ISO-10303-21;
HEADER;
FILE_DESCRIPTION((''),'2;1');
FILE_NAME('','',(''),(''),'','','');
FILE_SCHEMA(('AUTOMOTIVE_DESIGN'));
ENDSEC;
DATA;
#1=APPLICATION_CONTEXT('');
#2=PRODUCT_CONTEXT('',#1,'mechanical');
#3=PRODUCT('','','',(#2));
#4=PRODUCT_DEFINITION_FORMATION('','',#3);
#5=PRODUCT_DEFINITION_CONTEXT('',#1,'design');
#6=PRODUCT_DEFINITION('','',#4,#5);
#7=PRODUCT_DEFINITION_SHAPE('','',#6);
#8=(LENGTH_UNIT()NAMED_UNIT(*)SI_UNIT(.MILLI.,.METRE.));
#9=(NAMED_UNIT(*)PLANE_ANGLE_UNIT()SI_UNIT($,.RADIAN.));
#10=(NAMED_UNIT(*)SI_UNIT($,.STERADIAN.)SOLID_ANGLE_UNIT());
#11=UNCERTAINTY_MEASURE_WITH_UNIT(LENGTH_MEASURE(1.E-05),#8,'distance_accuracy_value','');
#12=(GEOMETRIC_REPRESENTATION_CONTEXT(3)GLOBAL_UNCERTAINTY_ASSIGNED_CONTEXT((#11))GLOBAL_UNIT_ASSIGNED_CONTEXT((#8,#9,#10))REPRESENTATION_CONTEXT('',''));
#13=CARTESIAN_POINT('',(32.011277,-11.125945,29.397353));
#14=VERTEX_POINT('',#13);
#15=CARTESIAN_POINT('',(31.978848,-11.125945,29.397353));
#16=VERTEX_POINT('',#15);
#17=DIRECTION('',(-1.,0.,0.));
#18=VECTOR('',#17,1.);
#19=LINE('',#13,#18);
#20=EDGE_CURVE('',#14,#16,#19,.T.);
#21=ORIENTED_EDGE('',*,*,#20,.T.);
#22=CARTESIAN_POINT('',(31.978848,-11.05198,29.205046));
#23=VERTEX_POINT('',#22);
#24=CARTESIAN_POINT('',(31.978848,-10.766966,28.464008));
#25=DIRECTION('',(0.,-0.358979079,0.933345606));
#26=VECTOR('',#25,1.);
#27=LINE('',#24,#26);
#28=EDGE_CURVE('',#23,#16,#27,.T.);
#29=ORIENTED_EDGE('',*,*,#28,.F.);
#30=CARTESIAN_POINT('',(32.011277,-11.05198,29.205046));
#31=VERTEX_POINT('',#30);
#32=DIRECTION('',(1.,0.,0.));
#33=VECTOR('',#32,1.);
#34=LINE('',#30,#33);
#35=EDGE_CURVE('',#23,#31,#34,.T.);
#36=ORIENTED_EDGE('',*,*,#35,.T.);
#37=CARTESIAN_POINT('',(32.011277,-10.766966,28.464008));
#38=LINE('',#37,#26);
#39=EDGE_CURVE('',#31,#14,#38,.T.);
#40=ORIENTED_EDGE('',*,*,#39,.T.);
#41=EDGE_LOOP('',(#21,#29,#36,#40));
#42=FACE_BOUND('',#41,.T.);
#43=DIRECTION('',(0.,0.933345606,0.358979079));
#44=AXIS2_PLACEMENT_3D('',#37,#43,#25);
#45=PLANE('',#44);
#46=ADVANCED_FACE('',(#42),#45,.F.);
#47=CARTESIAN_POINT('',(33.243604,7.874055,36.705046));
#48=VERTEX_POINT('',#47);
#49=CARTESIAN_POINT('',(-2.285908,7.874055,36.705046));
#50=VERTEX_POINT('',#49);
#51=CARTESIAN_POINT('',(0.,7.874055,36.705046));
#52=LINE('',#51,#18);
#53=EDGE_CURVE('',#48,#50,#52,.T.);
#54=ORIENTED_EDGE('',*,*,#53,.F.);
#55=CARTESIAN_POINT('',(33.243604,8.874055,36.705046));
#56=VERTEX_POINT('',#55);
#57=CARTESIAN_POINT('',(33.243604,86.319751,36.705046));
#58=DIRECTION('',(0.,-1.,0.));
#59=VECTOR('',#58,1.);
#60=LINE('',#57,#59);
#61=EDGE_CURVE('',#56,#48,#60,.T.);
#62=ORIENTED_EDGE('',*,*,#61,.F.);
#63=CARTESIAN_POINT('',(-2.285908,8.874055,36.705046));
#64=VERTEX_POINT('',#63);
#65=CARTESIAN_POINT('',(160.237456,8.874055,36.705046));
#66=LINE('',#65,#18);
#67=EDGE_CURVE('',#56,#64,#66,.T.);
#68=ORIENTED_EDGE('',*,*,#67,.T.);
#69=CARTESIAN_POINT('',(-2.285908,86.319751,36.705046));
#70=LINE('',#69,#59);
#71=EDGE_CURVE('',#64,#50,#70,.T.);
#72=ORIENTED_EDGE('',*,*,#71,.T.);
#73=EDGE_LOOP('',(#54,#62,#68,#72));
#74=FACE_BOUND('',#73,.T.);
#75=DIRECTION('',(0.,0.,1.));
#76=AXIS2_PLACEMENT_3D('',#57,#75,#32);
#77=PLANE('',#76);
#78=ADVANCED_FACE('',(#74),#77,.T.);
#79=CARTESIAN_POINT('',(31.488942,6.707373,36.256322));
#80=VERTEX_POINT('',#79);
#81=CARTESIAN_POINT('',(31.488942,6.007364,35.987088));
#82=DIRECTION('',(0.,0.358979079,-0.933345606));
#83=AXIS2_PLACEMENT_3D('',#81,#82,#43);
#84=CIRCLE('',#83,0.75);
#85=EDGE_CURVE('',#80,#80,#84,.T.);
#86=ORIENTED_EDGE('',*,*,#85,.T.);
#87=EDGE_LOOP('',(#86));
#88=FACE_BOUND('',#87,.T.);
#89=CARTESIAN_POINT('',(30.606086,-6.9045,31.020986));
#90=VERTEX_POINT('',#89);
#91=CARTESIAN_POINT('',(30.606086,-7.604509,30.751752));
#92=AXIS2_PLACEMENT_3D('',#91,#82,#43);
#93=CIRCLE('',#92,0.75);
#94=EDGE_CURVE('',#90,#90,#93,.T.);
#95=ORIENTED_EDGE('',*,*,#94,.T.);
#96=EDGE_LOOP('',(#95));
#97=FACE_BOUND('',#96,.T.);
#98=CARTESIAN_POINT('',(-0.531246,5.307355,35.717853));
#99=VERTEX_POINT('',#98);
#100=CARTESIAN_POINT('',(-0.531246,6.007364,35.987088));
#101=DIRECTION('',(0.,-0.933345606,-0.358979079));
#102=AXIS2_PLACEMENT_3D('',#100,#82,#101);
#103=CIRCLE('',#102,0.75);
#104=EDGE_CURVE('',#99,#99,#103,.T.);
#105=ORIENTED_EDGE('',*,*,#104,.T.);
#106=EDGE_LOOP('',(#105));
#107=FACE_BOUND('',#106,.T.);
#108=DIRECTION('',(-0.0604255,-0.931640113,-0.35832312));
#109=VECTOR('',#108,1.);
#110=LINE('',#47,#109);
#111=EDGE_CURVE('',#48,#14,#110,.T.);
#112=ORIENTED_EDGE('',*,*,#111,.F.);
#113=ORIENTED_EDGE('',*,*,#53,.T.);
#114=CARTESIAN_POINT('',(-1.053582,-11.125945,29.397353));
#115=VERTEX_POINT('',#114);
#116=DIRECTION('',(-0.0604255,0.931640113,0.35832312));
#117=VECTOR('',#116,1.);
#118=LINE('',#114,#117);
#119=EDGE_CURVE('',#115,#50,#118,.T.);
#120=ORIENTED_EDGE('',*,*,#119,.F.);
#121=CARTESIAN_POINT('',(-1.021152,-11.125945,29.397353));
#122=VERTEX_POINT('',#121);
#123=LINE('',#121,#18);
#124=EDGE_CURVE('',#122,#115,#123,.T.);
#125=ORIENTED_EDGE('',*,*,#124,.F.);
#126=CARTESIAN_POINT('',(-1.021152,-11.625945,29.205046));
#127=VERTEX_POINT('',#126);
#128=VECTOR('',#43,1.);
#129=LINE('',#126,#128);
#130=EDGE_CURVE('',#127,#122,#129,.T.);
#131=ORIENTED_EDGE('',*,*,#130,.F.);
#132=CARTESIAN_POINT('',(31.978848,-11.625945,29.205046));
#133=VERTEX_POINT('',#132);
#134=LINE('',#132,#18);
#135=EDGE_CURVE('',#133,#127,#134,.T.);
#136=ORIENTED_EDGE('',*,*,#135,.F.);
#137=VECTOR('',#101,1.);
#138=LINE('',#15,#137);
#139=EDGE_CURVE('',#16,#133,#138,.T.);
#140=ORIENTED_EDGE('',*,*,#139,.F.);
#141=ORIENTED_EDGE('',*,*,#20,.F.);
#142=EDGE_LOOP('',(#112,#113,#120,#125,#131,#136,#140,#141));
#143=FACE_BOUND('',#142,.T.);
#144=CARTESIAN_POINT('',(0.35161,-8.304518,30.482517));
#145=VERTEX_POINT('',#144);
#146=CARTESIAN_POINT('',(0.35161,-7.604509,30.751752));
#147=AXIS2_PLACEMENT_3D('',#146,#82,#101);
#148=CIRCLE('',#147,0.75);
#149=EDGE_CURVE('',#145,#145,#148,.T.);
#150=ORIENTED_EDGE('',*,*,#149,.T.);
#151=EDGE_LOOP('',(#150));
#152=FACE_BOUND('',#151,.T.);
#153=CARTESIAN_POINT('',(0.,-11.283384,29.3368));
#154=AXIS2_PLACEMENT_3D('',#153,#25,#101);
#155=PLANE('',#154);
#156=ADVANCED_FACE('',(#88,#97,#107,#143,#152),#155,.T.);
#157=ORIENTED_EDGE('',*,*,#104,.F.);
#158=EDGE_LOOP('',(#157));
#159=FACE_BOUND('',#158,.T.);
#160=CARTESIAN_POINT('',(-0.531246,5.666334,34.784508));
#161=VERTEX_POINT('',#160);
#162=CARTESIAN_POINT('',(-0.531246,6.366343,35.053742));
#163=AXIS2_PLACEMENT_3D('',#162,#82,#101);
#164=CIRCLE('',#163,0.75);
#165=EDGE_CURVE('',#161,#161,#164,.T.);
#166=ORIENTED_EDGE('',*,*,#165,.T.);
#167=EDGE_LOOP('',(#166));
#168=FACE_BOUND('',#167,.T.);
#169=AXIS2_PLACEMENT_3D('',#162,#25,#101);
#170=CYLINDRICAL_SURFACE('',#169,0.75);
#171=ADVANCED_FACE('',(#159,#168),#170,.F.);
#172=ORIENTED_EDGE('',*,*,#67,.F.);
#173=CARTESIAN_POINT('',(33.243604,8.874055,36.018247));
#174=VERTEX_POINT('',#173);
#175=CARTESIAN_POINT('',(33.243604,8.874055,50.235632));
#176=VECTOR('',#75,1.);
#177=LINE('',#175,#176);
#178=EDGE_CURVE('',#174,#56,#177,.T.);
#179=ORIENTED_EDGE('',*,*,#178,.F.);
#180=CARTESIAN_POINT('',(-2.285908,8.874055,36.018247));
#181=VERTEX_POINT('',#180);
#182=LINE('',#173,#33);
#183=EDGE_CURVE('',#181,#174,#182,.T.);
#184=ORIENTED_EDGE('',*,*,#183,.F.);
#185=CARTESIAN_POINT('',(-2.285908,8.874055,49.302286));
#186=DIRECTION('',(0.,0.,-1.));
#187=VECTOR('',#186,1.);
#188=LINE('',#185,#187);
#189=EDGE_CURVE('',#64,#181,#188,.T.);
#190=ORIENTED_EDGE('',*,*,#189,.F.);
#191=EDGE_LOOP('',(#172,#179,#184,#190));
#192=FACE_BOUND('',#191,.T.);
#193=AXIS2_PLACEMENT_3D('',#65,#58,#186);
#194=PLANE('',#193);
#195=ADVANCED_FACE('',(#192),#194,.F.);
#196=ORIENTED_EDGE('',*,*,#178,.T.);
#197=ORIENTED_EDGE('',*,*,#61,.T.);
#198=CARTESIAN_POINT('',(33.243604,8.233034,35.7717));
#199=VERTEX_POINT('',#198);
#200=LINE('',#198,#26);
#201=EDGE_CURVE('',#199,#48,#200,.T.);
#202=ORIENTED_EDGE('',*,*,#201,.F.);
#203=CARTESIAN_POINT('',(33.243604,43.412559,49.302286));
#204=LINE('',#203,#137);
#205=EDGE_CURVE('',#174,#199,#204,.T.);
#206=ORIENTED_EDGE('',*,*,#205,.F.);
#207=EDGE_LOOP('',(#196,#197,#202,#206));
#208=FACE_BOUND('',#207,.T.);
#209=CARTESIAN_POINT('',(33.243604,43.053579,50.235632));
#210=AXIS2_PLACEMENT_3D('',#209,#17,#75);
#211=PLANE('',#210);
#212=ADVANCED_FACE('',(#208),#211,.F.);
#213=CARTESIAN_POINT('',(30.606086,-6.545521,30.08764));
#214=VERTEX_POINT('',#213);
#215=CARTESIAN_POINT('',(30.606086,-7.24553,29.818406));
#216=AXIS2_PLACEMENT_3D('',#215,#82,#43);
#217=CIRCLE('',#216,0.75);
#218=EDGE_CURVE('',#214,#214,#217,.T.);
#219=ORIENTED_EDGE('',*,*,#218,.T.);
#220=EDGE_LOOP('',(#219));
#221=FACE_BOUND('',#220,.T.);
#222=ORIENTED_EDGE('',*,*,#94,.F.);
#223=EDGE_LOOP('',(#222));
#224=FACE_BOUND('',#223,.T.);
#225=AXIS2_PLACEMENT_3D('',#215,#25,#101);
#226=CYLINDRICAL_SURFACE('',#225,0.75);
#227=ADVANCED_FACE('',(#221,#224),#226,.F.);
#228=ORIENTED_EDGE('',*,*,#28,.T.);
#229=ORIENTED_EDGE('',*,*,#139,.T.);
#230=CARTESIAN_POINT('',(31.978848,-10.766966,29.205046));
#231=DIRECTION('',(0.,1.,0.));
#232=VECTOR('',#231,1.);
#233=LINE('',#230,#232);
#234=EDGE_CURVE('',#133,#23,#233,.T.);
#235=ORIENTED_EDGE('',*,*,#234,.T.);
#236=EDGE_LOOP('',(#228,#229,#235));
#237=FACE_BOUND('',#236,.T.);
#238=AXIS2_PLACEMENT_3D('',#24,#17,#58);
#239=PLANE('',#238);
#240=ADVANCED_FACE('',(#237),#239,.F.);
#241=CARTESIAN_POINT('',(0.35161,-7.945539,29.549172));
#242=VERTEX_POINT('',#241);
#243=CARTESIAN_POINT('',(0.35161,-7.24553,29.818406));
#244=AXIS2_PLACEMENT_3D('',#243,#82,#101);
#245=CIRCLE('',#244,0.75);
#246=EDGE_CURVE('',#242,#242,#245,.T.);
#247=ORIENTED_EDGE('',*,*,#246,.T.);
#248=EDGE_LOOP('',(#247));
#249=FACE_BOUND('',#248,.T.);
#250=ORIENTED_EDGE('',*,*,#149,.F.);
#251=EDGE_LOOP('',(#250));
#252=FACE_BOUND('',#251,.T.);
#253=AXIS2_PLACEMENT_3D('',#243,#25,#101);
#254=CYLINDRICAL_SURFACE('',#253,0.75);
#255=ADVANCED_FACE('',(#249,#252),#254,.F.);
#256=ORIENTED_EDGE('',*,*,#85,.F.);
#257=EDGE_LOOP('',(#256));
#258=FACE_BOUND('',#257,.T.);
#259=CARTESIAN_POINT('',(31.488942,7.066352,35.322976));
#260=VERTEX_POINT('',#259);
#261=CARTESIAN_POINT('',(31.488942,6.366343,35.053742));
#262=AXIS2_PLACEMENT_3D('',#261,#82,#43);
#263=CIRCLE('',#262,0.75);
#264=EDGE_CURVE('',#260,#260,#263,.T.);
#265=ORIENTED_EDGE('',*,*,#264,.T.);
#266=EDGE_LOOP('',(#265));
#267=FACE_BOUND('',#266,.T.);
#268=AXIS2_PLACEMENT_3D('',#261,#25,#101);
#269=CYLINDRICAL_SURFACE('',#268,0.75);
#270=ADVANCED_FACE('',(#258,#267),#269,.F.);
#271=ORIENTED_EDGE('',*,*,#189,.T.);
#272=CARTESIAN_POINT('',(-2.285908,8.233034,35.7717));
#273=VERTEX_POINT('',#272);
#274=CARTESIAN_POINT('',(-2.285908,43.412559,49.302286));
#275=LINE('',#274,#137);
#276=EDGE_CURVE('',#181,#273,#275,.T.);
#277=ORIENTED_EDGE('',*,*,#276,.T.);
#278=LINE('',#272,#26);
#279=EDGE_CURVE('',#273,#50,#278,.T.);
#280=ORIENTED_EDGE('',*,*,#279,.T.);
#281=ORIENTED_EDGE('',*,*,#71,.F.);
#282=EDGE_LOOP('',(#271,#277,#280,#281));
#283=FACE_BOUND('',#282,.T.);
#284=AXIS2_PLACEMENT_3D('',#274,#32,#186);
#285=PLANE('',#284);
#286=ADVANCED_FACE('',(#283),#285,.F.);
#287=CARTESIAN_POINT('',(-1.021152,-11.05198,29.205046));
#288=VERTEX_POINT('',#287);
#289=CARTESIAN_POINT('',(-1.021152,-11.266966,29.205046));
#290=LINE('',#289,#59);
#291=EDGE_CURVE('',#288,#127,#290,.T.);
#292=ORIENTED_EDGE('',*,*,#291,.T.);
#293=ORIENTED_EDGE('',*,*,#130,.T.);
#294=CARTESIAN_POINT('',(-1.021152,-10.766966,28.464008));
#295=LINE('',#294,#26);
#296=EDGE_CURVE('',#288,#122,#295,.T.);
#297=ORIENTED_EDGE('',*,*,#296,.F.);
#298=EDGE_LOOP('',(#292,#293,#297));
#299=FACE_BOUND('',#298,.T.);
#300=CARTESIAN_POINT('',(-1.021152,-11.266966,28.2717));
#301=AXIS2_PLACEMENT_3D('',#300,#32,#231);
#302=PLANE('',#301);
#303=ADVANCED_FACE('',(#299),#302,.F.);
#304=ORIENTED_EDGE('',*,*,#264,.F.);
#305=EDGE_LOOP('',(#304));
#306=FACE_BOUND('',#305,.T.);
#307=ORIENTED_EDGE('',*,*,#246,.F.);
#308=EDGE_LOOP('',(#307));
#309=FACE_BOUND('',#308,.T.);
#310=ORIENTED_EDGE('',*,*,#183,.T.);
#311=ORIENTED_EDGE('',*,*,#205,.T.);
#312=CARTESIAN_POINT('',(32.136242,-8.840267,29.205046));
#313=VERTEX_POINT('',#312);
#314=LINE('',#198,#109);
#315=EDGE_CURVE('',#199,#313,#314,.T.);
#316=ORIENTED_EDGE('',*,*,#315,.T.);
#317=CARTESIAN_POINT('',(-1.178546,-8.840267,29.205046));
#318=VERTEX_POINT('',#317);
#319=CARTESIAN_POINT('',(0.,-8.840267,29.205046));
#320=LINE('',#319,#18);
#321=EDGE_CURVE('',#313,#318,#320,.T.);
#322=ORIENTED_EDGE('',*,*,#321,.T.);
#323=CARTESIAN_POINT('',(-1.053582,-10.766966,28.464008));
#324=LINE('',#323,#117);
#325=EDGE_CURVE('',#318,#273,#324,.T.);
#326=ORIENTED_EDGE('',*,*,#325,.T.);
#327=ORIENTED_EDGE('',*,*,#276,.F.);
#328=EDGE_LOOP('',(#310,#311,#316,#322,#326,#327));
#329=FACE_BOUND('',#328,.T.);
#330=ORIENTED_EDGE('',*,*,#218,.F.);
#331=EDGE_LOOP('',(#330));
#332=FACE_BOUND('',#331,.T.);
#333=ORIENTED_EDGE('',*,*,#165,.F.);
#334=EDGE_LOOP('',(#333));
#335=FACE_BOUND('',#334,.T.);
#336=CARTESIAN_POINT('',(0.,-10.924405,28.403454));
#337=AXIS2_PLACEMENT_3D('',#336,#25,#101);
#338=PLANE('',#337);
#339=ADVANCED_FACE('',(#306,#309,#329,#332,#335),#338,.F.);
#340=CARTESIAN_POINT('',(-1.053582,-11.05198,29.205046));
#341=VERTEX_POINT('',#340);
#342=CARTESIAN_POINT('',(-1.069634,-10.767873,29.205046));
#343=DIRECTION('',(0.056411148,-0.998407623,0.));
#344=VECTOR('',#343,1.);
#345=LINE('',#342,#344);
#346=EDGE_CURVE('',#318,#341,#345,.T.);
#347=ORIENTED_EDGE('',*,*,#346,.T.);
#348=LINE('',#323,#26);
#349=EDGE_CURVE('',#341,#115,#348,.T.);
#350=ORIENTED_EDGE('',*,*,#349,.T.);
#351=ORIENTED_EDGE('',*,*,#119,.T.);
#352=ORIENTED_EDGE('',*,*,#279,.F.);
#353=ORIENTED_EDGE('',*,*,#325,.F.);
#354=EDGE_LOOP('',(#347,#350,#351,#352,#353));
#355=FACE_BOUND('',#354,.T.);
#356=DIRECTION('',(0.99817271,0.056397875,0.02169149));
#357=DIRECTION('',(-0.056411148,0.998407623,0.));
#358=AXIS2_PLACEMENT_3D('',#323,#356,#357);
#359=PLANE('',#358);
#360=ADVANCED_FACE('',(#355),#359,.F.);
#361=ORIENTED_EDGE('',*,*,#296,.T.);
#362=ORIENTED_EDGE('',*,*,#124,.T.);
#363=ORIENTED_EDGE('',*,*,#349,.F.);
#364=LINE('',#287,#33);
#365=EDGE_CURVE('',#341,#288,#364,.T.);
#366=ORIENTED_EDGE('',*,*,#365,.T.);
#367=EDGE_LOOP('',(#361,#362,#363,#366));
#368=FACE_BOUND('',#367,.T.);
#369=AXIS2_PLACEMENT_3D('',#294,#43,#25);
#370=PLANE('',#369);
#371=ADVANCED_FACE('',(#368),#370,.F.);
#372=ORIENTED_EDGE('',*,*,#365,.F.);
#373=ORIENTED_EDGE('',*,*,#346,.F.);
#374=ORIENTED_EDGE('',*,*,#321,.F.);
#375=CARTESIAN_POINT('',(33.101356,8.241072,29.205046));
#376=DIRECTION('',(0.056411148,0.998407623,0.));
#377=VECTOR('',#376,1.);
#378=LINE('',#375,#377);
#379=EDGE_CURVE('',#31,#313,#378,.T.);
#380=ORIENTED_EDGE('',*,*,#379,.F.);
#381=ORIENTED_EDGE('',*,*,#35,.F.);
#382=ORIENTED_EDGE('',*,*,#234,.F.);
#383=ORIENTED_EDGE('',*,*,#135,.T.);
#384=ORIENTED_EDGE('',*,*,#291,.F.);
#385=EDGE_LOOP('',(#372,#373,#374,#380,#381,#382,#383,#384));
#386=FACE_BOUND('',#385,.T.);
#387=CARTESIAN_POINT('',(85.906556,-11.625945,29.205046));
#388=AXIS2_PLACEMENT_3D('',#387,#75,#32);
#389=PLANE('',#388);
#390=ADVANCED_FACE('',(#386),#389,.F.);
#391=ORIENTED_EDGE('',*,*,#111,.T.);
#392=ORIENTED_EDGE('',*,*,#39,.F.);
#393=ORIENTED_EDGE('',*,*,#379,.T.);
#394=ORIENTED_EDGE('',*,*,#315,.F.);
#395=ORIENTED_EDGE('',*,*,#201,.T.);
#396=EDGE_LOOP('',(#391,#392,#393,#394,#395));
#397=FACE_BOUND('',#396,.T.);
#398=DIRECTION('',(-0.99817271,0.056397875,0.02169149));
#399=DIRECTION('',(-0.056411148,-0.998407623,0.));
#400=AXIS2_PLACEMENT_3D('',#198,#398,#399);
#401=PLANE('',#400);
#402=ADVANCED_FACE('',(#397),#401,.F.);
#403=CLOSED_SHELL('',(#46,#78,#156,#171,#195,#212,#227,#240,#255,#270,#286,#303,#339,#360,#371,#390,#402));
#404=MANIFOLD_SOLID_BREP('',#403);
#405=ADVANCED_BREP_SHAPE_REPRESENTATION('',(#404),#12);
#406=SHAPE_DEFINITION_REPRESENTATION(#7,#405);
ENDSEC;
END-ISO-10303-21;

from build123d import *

# Parameters (mm, degrees)
BOSS_EXTRUDE1_DEPTH     = 1
BOSS_EXTRUDE2_REACH     = 55.976
SKETCH4_W               = 35.529511627
SKETCH4_H               = 1
CUT_EXTRUDE3_DEPTH      = 54.861211874
CUT_EXTRUDE3_DEPTH_BACK = 54.861211874
CUT_EXTRUDE4_DEPTH      = 52.541211292
CUT_EXTRUDE4_DEPTH_BACK = 52.541211292
CAVITY1_START           = -31.431872012
CAVITY1_OUTLINE_R       = 0.75
CAVITY1_DEPTH           = 1


# Read off the part's stored shape, not the designer's step: Cavity1
with BuildPart() as part:
    # Sketch1 → Boss-Extrude1 (new body)
    with BuildSketch(Plane(origin=(0, -11.283384476, 29.336799637), x_dir=(-1, 0, 0), z_dir=(0, 0.35897907930886913, -0.9333456062030595))):
        Polygon((2.285907974, 20.525558465), (-33.243603653, 20.525558465), (-32.011277476, 0.168683291), (-31.978847839, 0.168683291), (-31.978847839, -0.36702395), (1.021152161, -0.36702395), (1.021152161, 0.168683291), (1.053581797, 0.168683291), align=None)
    extrude(amount=BOSS_EXTRUDE1_DEPTH)

    # Boss-Extrude2: up to this plane
    boss_extrude2_end = Plane(origin=(160.237455752, 8.874055334, 36.705045718), z_dir=(0, -1, 0))
    # Sketch4 → Boss-Extrude2 (add, up to the surface)
    with BuildSketch(Plane(origin=(0, 19.157439808, 7.36824608), x_dir=(1, 0, 0), z_dir=(0, 0.9333456062030596, 0.35897907930886913)), mode=Mode.PRIVATE) as boss_extrude2_sk1:
        with Locations((15.47884784, -30.931872012)):
            Rectangle(SKETCH4_W, SKETCH4_H)
    boss_extrude2_tool1 = split(extrude(boss_extrude2_sk1.sketch, amount=BOSS_EXTRUDE2_REACH, mode=Mode.PRIVATE), bisect_by=boss_extrude2_end, keep=Keep.BOTH, mode=Mode.PRIVATE)
    add(boss_extrude2_tool1.solids().sort_by_distance((15.478848, 8.053545, 36.238373))[0])

    # Sketch5 → Cut-Extrude3 (cut, two sides: drawn at the far end of the back side and taken through both)
    with BuildSketch(Plane(origin=(0, 8.874055334, 0), x_dir=(1, 0, 0), z_dir=(0, 1, 0)).offset(-CUT_EXTRUDE3_DEPTH_BACK)):
        Polygon((116.276952597, -36.705045717), (33.243603653, -36.705045717), (-2.285907974, -36.705045717), (-85.319256919, -36.705045717), (-85.319256919, -202.771743607), (116.276952597, -202.771743607), align=None)
    extrude(amount=CUT_EXTRUDE3_DEPTH + CUT_EXTRUDE3_DEPTH_BACK, mode=Mode.SUBTRACT)

    # Sketch6 → Cut-Extrude4 (cut, two sides: drawn at the far end of the back side and taken through both)
    with BuildSketch(Plane(origin=(31.978847839, 0, 0), x_dir=(0, 0, -1), z_dir=(1, 0, 0)).offset(-CUT_EXTRUDE4_DEPTH_BACK)):
        Polygon((-29.205045717, -65.283704575), (-29.205045717, -11.625944667), (-29.205045717, -5.8346384), (-29.205045717, 47.823121508), (78.110474099, 47.823121508), (78.110474099, -65.283704575), align=None)
    extrude(amount=CUT_EXTRUDE4_DEPTH + CUT_EXTRUDE4_DEPTH_BACK, mode=Mode.SUBTRACT)

    # Cavity1 outline → Cavity1 (cut)
    with BuildSketch(Plane(origin=(0, 0, 0), x_dir=(1, 0, 0), z_dir=(0, 0.3589790793088689, -0.9333456062030596)).offset(CAVITY1_START)):
        with Locations((-0.531246108, -18.525558467)):
            Circle(CAVITY1_OUTLINE_R)
        with Locations((0.351610097, -3.941600191)):
            Circle(CAVITY1_OUTLINE_R)
        with Locations((30.606085582, -3.941600191)):
            Circle(CAVITY1_OUTLINE_R)
        with Locations((31.488941787, -18.525558467)):
            Circle(CAVITY1_OUTLINE_R)
    extrude(amount=CAVITY1_DEPTH, mode=Mode.SUBTRACT)


solid = part.part
